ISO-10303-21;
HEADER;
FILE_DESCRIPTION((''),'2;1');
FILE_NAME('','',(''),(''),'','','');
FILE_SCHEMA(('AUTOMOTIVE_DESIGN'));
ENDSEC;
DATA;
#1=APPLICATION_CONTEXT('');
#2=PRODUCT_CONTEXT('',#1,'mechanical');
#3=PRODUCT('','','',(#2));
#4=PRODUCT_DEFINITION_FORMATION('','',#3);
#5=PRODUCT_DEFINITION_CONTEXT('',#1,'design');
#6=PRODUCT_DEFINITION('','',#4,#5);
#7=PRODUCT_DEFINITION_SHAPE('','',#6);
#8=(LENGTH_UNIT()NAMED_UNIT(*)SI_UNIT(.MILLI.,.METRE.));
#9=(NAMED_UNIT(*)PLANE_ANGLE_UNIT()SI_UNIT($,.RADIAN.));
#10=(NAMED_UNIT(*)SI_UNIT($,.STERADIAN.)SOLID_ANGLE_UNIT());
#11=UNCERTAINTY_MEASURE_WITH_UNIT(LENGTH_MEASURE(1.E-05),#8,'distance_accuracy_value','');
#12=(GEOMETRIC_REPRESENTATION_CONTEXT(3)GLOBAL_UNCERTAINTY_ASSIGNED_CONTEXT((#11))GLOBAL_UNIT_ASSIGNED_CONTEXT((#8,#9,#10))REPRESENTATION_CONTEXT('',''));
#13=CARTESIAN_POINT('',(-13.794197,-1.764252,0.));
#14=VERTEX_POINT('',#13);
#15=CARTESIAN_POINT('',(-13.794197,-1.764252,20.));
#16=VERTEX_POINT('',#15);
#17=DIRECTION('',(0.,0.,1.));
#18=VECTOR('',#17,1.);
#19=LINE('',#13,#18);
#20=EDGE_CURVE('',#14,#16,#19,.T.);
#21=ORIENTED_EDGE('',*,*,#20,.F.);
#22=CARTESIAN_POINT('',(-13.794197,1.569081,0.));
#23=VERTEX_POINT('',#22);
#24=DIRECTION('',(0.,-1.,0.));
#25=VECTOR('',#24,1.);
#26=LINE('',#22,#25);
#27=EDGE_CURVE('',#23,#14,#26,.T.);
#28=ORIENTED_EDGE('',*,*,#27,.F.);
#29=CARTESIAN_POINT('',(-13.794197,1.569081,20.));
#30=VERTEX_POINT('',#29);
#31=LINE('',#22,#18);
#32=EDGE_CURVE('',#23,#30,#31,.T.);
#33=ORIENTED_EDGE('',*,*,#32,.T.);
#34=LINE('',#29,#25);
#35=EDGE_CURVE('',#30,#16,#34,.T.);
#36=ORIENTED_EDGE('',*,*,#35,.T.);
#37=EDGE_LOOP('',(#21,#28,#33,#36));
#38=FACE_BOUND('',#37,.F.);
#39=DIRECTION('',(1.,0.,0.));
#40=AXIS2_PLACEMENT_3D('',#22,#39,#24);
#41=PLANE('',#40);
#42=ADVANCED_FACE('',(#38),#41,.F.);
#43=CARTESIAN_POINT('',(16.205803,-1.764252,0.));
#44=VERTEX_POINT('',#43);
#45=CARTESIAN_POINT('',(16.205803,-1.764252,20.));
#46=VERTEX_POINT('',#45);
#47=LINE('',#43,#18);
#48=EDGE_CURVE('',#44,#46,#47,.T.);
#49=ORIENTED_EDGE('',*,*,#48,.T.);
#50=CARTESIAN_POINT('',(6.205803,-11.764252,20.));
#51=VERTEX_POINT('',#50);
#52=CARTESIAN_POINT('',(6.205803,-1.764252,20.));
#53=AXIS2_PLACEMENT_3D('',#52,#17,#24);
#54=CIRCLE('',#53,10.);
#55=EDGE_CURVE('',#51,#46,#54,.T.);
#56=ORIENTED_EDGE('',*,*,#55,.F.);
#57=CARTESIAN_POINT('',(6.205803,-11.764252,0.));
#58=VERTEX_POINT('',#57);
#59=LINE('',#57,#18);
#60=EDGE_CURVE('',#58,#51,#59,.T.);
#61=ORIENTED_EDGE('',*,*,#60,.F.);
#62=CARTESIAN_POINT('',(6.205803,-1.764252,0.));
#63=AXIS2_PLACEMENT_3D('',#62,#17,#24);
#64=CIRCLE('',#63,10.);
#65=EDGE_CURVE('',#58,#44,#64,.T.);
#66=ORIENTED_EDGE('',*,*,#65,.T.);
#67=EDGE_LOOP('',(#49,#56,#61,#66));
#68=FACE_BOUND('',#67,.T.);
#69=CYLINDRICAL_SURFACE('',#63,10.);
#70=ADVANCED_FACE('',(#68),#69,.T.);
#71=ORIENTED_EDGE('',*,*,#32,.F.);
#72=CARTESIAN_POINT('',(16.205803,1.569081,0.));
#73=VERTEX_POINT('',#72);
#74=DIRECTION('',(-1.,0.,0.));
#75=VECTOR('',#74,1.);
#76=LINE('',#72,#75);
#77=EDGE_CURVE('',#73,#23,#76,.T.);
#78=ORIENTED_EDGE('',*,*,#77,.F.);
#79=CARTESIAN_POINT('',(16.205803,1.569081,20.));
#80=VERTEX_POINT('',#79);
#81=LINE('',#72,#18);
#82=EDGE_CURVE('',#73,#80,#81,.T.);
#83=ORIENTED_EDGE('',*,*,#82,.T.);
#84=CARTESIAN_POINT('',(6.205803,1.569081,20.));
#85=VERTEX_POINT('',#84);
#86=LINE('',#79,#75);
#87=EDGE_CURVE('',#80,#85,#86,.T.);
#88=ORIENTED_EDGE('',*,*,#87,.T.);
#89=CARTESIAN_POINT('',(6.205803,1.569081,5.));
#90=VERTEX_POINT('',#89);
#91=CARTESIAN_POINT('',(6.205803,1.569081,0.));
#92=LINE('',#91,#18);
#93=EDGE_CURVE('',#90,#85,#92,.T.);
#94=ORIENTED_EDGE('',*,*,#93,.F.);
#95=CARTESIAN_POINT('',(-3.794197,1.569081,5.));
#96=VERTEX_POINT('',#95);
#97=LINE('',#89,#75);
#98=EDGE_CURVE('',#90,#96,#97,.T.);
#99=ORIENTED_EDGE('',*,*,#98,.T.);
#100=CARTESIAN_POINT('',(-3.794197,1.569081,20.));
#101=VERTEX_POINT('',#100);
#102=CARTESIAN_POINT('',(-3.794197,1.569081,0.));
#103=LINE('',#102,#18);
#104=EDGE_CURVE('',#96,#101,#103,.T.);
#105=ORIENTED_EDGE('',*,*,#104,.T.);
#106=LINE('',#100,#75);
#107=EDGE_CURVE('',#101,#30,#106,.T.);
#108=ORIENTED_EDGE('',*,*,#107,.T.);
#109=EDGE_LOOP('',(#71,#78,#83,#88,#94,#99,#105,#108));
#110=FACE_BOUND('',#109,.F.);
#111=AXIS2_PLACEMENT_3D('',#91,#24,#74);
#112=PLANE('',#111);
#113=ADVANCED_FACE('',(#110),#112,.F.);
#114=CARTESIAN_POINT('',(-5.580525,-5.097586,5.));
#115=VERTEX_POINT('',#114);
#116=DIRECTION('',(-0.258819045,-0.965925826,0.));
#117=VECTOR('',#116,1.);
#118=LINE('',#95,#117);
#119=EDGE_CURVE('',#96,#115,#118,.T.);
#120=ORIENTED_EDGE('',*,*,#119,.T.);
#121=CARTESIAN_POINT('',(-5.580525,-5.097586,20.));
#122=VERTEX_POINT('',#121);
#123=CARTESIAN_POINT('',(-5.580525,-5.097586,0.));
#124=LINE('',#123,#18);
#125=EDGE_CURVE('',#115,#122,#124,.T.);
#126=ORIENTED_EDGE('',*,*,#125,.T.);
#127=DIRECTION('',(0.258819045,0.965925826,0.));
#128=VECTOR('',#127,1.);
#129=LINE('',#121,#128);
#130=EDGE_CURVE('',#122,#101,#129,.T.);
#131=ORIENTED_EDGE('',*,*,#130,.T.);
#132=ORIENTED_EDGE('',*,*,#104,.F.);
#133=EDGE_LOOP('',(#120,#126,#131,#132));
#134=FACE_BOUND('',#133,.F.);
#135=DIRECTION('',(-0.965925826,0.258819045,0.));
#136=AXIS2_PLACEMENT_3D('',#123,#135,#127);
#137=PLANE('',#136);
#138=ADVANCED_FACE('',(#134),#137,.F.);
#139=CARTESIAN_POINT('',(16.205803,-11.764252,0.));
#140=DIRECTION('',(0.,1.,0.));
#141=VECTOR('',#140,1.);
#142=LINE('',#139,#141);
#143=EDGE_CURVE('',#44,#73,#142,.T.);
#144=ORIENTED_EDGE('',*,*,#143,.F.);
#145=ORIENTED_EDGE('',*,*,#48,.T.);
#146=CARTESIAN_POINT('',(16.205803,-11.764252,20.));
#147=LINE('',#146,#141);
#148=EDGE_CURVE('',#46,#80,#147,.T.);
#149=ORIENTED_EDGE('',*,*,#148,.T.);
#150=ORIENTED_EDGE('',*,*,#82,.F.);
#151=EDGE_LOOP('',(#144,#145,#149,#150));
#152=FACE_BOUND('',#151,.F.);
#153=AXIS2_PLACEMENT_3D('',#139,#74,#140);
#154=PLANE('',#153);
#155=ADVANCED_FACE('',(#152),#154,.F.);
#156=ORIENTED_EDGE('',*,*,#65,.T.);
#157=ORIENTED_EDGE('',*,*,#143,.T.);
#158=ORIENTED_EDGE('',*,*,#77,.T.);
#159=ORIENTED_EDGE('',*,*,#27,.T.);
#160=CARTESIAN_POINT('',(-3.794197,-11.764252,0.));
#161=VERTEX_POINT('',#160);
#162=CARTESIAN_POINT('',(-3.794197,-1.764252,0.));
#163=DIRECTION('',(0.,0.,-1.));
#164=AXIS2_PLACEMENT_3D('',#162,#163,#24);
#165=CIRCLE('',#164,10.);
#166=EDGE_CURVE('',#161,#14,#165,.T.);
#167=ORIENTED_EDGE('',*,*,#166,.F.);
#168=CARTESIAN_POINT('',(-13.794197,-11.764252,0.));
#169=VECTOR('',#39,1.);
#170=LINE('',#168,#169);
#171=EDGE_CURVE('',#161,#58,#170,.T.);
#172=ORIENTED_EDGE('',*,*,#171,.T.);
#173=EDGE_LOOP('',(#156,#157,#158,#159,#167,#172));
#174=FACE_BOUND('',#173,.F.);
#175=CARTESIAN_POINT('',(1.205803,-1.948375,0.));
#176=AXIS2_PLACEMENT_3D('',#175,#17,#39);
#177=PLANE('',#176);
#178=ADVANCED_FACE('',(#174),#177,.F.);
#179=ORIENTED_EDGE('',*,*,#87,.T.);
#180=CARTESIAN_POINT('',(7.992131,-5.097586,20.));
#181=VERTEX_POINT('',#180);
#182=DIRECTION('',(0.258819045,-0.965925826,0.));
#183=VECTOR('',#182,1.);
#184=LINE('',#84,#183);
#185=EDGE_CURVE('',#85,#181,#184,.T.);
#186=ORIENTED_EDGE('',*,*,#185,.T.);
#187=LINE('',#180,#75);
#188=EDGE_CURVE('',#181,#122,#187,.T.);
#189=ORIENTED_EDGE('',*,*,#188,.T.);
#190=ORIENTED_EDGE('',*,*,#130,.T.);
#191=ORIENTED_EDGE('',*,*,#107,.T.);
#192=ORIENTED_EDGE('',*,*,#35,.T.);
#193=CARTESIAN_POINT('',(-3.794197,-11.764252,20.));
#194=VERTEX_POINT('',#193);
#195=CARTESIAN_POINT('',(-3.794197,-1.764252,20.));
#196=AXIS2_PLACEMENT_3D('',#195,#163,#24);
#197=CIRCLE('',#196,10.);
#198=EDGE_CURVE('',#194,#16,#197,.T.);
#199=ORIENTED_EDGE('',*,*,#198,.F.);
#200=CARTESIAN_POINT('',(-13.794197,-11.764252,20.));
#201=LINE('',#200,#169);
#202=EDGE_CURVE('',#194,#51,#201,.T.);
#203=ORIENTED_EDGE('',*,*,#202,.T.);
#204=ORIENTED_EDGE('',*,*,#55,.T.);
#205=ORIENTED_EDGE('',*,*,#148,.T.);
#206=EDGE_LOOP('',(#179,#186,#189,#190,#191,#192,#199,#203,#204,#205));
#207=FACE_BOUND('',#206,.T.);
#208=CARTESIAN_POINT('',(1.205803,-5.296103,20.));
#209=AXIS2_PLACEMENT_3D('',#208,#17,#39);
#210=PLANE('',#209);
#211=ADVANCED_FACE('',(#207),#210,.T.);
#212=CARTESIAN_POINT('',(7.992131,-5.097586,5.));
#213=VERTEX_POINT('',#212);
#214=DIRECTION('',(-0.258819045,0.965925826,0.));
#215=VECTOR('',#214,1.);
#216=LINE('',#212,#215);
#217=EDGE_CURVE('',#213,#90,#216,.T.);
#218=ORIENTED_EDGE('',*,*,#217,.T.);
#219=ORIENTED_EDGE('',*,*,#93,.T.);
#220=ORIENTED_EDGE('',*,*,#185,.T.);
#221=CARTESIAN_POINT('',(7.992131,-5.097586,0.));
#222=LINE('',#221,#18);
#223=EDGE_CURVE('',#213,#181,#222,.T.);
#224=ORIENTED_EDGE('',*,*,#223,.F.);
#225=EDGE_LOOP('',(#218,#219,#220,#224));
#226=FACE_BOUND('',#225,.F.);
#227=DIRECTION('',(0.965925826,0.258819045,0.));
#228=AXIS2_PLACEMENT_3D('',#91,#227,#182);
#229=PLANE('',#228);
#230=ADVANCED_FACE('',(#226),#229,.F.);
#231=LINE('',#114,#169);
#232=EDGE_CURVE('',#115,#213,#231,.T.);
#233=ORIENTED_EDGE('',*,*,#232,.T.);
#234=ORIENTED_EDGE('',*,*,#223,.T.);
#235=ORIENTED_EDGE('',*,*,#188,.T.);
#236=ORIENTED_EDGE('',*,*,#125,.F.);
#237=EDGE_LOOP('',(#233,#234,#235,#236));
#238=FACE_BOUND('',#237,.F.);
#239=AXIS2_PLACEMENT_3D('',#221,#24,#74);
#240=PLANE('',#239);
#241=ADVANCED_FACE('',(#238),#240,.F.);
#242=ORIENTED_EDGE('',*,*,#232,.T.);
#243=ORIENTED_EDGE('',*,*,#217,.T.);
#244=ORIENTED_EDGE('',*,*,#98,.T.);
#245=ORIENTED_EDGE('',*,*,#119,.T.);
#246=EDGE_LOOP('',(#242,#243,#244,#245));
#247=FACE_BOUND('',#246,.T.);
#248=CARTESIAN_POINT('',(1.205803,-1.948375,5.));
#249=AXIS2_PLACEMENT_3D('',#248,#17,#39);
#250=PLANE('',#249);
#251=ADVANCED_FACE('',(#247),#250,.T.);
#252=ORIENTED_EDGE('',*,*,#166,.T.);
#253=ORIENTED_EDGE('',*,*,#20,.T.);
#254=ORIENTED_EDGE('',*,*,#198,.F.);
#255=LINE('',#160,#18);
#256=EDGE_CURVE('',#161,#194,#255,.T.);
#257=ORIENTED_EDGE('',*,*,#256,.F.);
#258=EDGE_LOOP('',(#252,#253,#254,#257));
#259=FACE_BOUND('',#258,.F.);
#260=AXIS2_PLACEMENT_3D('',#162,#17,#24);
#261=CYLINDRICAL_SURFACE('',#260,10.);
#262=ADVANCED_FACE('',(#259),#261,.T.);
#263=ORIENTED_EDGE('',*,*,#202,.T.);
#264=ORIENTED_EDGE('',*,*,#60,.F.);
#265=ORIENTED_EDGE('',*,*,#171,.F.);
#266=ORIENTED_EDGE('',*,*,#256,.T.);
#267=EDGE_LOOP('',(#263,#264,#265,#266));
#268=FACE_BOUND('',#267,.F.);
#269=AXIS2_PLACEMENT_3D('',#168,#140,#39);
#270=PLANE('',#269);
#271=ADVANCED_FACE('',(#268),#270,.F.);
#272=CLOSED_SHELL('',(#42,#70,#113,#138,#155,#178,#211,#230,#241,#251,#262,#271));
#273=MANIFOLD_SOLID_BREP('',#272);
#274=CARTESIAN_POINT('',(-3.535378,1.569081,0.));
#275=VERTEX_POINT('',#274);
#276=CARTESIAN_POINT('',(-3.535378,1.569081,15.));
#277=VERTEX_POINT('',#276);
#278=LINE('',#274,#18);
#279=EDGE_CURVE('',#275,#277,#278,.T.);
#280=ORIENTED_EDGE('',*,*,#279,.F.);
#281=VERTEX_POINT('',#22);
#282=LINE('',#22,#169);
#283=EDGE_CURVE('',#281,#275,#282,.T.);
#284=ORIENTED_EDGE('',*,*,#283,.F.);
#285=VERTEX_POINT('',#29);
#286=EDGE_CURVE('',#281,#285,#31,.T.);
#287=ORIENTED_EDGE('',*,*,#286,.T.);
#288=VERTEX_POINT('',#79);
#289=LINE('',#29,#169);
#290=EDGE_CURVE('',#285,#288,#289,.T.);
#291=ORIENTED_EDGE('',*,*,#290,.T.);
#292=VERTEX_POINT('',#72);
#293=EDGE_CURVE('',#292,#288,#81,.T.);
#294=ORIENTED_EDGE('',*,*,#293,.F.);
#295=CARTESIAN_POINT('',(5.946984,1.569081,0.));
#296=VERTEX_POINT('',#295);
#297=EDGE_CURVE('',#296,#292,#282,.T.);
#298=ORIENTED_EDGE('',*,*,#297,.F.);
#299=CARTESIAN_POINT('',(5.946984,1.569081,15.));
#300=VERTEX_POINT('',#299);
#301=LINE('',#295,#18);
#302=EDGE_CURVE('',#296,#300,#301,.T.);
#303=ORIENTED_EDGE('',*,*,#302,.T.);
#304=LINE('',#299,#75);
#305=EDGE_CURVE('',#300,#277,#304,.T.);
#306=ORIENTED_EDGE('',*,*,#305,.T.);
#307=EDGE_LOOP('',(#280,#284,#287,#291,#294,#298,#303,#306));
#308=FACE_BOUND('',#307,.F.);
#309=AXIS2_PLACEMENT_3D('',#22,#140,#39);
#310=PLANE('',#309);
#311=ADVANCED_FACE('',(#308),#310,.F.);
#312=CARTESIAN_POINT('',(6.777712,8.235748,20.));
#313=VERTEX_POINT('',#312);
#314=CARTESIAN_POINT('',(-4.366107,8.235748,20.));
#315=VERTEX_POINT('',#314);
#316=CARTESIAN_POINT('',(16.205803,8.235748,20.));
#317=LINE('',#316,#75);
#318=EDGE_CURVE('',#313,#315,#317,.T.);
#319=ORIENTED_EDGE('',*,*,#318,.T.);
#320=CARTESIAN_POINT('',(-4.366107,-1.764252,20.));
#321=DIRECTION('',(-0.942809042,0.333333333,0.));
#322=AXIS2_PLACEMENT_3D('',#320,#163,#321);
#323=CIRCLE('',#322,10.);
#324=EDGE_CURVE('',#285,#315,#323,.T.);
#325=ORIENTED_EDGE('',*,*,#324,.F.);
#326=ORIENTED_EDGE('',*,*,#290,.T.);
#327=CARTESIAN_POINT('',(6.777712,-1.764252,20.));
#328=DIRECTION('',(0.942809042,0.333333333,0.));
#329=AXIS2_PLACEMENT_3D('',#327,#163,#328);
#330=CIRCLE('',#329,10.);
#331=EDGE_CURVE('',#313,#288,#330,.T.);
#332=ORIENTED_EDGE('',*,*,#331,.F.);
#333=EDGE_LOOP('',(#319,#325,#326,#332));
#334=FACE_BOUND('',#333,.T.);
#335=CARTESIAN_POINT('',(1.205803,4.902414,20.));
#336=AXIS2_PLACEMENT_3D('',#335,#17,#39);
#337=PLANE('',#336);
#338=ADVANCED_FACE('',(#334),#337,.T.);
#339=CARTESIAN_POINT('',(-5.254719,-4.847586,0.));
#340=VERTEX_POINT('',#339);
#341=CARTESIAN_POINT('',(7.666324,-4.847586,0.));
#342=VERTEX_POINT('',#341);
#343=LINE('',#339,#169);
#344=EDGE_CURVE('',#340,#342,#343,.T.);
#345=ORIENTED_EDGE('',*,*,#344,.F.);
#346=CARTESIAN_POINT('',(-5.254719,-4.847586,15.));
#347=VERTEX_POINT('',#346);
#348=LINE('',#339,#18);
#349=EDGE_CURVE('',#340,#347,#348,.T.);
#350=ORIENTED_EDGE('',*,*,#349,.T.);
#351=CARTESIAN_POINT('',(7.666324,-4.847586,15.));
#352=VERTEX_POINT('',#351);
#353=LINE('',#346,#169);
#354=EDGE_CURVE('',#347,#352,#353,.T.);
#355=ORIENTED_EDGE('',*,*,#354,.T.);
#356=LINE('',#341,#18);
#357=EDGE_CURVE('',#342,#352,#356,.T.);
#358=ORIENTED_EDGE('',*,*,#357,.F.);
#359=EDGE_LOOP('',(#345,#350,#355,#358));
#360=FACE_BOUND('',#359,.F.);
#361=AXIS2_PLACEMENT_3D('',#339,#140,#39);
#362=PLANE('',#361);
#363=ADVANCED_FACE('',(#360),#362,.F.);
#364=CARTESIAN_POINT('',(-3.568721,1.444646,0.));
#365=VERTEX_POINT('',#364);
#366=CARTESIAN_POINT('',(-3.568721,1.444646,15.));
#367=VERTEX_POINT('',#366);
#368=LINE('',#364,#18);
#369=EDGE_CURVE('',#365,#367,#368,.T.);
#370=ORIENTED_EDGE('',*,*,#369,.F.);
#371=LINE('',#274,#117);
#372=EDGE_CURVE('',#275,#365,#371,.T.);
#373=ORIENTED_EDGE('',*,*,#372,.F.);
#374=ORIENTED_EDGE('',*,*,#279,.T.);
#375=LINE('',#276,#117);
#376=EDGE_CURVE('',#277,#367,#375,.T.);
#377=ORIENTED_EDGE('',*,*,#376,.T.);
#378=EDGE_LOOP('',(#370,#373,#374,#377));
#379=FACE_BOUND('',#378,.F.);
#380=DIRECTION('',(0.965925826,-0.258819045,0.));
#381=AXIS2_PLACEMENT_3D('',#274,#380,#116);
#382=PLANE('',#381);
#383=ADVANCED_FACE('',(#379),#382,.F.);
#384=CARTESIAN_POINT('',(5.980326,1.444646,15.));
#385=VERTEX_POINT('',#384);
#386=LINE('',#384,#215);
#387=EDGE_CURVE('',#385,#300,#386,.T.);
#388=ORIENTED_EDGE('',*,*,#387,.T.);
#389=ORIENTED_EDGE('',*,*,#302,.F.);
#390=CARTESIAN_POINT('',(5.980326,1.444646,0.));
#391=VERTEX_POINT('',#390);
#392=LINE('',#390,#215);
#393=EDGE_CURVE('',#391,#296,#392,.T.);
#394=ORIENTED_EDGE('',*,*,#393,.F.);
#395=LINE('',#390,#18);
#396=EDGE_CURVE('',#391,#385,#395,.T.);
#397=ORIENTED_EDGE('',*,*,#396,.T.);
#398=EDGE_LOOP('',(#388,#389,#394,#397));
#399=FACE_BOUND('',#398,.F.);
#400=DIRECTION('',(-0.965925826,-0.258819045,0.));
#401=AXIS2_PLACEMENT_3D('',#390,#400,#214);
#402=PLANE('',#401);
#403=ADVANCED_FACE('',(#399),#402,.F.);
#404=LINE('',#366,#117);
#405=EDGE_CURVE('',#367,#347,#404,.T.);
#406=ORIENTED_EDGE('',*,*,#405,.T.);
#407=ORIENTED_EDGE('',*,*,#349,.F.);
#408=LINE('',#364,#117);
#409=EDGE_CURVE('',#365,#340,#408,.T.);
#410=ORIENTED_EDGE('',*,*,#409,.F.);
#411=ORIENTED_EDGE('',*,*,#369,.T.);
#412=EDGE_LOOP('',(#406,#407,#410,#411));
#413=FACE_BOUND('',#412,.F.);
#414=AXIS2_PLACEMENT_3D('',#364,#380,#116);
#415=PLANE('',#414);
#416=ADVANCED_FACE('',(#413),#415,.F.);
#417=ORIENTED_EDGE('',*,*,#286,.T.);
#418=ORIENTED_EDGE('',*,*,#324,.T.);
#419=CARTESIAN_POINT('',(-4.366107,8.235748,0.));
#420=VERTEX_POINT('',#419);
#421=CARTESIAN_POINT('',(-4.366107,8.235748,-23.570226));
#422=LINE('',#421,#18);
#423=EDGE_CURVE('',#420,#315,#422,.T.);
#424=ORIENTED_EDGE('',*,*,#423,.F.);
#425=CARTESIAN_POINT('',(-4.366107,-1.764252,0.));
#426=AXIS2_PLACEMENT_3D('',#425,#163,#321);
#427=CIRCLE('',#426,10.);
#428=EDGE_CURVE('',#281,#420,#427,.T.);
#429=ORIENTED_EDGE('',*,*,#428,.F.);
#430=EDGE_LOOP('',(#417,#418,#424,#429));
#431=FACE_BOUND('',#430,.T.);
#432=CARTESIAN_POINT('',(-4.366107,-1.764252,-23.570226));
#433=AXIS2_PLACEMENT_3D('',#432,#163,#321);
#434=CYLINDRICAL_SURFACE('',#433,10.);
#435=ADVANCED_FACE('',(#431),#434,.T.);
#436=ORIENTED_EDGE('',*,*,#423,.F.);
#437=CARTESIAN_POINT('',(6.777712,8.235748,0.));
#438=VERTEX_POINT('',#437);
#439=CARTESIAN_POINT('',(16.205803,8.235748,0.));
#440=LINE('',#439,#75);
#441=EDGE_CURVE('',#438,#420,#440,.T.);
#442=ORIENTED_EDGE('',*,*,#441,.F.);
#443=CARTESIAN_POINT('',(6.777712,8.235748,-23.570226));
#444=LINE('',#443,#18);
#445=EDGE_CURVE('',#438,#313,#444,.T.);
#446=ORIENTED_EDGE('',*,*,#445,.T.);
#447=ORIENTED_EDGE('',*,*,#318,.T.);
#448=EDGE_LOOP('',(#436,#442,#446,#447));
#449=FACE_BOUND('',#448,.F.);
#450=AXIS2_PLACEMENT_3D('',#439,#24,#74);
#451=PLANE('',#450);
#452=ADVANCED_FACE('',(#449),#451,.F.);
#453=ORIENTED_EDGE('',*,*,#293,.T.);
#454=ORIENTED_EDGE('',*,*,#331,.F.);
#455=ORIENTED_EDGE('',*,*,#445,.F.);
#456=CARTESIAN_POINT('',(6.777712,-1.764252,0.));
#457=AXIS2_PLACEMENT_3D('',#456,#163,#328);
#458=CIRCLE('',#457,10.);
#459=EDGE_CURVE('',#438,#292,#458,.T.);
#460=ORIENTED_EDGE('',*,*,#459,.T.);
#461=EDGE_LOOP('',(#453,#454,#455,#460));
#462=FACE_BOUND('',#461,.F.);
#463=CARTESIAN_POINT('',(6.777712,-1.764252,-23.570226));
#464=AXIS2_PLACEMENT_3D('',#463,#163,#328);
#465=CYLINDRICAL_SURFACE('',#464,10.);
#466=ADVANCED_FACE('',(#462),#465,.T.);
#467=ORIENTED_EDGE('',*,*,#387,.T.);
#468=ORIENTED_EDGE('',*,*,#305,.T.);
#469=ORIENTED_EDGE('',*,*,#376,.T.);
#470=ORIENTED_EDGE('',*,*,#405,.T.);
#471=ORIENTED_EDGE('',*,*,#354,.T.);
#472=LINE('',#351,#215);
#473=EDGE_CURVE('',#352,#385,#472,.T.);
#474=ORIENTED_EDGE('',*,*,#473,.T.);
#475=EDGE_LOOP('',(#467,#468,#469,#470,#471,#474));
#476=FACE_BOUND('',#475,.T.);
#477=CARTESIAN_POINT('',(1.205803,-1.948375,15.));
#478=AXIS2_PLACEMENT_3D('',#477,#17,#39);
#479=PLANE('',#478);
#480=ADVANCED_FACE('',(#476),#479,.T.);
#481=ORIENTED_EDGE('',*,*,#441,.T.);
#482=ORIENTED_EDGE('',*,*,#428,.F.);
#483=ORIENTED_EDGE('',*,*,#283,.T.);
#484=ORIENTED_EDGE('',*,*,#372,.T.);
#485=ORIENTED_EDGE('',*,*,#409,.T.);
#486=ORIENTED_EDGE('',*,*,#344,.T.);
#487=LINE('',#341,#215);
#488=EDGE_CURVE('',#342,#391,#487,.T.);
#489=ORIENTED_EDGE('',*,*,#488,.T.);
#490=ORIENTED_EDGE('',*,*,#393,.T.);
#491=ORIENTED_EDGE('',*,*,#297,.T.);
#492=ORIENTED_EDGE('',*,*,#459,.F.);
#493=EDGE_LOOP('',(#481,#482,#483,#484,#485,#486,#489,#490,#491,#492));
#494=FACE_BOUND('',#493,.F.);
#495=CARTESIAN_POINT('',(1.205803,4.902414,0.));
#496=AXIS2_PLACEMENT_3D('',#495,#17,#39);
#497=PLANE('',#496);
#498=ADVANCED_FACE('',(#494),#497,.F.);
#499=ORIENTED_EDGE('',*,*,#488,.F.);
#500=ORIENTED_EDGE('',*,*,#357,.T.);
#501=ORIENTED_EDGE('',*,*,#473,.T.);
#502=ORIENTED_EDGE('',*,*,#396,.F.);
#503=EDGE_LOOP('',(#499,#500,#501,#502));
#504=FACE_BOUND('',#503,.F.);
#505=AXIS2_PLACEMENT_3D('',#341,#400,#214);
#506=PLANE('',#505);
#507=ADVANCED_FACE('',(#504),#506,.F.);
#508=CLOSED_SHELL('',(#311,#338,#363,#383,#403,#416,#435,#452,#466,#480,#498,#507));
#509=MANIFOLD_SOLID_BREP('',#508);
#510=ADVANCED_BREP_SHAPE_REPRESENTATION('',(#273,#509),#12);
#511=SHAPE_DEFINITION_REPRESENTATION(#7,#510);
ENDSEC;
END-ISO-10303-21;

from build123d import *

# Parameters (mm, degrees)
F2_DEPTH      = 20
F3_DEPTH      = 20
F4_DEPTH      = 15
F5_DEPTH      = 5
F6_F1_R       = 10
F6_F2_R       = 10
F6_2_T1_DEPTH = 67.1404520791


# Not quite as in the source:
# - a fillet or chamfer that OpenCascade refuses, or shapes differently, is made with other operations: its cross-section is extruded or revolved along the edge and cut away or added


with BuildPart() as f2:
    # F1 (on Top) → F2 (new body)
    with BuildSketch(Plane.XY):
        Polygon((16.2058026315, -11.7642522434), (16.2058026315, 1.56908109), (6.2058026315, 1.56908109), (7.992130581, -5.0975855767), (1.2058026315, -5.0975855767), (-5.580525318, -5.0975855767), (-3.7941973685, 1.56908109), (-13.7941973685, 1.56908109), (-13.7941973685, -11.7642522434), align=None)
    extrude(amount=F2_DEPTH)

    # F1 (on Top) → F5 (join)
    with BuildSketch(Plane.XY):
        Polygon((5.980325855, 1.4446460496), (5.9469835864, 1.56908109), (1.2058026315, 1.56908109), (-3.5353783234, 1.56908109), (-3.568720592, 1.4446460496), (-5.2547189748, -4.8475855767), (-2.0442543917, -4.8475855767), (7.6663242378, -4.8475855767), align=None)
        Polygon((7.992130581, -5.0975855767), (6.2058026315, 1.56908109), (5.9469835864, 1.56908109), (5.980325855, 1.4446460496), (7.6663242378, -4.8475855767), (-2.0442543917, -4.8475855767), (-5.2547189748, -4.8475855767), (-3.568720592, 1.4446460496), (-3.5353783234, 1.56908109), (-3.7941973685, 1.56908109), (-5.580525318, -5.0975855767), (1.2058026315, -5.0975855767), align=None)
    extrude(amount=F5_DEPTH)

    # F6: fillet of radius 10 on 2 edges, made by hand

    # F6_f1
    f6_f1_edges = [f2.edges().sort_by_distance(p)[0] for p in [
        (16.2058026315, -11.7642522434, 10),
    ]]
    fillet(f6_f1_edges, radius=F6_F1_R)

    # F6_f2
    f6_f2_edges = [f2.edges().sort_by_distance(p)[0] for p in [
        (-13.7941973685, -11.7642522434, 10),
    ]]
    fillet(f6_f2_edges, radius=F6_F2_R)


with BuildPart() as f3:
    # F1 (on Top) → F3 (new body)
    with BuildSketch(Plane.XY):
        Polygon((6.2058026315, 1.56908109), (16.2058026315, 1.56908109), (16.2058026315, 8.2357477566), (-13.7941973685, 8.2357477566), (-13.7941973685, 1.56908109), (-3.7941973685, 1.56908109), (-3.5353783234, 1.56908109), (1.2058026315, 1.56908109), (5.9469835864, 1.56908109), align=None)
    extrude(amount=F3_DEPTH)

    # F1 (on Top) → F4 (join)
    with BuildSketch(Plane.XY):
        Polygon((5.980325855, 1.4446460496), (5.9469835864, 1.56908109), (1.2058026315, 1.56908109), (-3.5353783234, 1.56908109), (-3.568720592, 1.4446460496), (-5.2547189748, -4.8475855767), (-2.0442543917, -4.8475855767), (7.6663242378, -4.8475855767), align=None)
    extrude(amount=F4_DEPTH)

    # F6#2: fillet of radius 10 on 2 edges, made by hand

    # F6_2_s2 → F6_2_t1 (cut)
    with BuildSketch(Plane.XY.offset(-23.5702260396)):
        with BuildLine():
            ThreePointArc((-13.7941973685, 1.56908109), (-10.1396096446, 6.4007135659), (-4.3661069527, 8.2357477566))
            Line((-4.3661069527, 8.2357477566), (-13.7941973685, 8.2357477566))
            Line((-13.7941973685, 8.2357477566), (-13.7941973685, 1.56908109))
        make_face()
        with BuildLine():
            ThreePointArc((16.2058026315, 1.56908109), (12.5512149076, 6.4007135659), (6.7777122157, 8.2357477566))
            Line((6.7777122157, 8.2357477566), (16.2058026315, 8.2357477566))
            Line((16.2058026315, 8.2357477566), (16.2058026315, 1.56908109))
        make_face()
    extrude(amount=F6_2_T1_DEPTH, mode=Mode.SUBTRACT)


solid = Compound([f2.part, f3.part])
